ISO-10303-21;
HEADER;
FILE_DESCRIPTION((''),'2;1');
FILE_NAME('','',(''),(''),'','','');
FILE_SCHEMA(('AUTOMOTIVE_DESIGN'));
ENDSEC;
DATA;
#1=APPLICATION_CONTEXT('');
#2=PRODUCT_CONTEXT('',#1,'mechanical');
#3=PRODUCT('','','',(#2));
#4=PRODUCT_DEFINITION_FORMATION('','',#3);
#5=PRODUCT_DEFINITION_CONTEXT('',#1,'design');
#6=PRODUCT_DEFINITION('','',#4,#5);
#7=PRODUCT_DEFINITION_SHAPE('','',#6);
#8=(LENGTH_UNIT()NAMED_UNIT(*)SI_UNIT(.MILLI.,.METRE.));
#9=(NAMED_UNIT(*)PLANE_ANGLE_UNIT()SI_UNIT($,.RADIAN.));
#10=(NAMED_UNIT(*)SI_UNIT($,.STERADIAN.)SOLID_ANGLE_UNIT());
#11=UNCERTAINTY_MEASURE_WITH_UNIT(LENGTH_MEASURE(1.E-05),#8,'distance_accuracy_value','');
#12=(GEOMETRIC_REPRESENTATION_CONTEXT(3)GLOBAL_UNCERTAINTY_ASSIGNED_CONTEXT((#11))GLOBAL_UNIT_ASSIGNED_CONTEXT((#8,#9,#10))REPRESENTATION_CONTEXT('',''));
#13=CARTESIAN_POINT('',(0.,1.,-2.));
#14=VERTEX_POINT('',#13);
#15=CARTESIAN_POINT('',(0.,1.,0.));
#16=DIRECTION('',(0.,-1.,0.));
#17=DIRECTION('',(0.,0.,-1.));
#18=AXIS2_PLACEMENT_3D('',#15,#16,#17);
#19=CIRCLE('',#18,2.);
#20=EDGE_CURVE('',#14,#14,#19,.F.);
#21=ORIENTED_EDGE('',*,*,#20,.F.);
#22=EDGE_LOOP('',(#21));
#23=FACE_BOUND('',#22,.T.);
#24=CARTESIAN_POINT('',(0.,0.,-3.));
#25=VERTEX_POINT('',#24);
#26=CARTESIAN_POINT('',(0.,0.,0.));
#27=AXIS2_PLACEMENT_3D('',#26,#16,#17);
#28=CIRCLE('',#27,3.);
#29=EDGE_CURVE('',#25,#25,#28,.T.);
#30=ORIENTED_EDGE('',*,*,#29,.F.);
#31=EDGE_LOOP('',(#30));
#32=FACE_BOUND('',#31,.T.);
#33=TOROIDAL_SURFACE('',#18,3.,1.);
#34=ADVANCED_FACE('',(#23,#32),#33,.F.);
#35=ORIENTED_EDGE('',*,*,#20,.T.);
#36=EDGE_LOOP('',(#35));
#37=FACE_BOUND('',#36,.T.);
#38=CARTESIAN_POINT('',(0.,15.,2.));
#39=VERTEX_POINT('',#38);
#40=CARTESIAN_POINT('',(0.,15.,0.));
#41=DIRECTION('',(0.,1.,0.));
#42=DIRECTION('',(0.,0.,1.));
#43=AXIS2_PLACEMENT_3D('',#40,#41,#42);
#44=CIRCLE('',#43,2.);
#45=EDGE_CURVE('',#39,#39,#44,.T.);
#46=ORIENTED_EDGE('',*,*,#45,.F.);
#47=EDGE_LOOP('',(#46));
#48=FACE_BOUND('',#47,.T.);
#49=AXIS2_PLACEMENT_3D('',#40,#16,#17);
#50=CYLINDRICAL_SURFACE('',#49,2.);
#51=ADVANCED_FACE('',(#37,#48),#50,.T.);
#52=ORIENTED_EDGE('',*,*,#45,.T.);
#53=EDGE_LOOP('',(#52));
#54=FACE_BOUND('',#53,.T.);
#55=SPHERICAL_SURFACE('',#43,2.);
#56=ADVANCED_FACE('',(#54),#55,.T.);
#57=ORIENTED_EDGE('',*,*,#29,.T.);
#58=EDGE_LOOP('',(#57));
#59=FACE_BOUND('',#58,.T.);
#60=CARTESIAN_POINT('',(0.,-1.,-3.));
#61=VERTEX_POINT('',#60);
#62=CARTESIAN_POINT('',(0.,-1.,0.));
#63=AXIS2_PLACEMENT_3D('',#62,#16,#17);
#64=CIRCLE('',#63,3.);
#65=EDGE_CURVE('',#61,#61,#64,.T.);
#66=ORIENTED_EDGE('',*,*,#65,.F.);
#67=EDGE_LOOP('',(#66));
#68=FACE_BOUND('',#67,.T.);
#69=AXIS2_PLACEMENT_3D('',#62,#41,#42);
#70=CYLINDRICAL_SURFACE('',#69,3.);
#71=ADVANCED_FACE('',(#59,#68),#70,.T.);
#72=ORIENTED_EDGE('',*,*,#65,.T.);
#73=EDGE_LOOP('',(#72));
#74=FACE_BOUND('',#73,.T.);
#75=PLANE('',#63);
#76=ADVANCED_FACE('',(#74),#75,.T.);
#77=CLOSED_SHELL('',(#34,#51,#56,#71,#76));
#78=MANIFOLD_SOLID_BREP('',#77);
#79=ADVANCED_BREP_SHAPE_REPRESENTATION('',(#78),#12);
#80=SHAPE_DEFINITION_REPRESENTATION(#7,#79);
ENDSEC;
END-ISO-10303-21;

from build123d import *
from build123d.topology import SkipClean

# Parameters (mm, degrees)
SKETCH1_R           = 2
BOSS_EXTRUDE1_DEPTH = 15
SKETCH3_R           = 3
BOSS_EXTRUDE2_DEPTH = 1
FILLET3_R           = 1


with BuildPart() as part:
    # Sketch1 → Boss-Extrude1 (new body)
    with BuildSketch(Plane(origin=(0, 0, 0), x_dir=(1, 0, 0), z_dir=(0, 1, 0))):
        with Locations(Location((0, 0, 0), (0, 0, 270))):
            Circle(SKETCH1_R)
    extrude(amount=BOSS_EXTRUDE1_DEPTH)

    # Sketch2 → Revolve1 (revolve)
    with SkipClean():  # the faces are left unmerged after this step: merging them gives an invalid solid
        with BuildSketch(Plane.XY):
            with BuildLine():
                Line((2, 15), (-2, 15))
                ThreePointArc((-2, 15), (0, 17), (2, 15))
            make_face()
        revolve(axis=Axis((2, 15, 0), (-1, 0, 0)))

    # Sketch3 → Boss-Extrude2 (add)
    with BuildSketch(Plane.XZ):
        with Locations(Location((0, 0, 0), (0, 0, 270))):
            Circle(SKETCH3_R)
    extrude(amount=BOSS_EXTRUDE2_DEPTH)

    # Fillet3
    fillet3_edges = [part.edges().sort_by_distance(p)[0] for p in [
        (0, 0, -2),
    ]]
    fillet(fillet3_edges, radius=FILLET3_R - 0.0001)  # a hair under: the kernel refuses the full size


solid = part.part
